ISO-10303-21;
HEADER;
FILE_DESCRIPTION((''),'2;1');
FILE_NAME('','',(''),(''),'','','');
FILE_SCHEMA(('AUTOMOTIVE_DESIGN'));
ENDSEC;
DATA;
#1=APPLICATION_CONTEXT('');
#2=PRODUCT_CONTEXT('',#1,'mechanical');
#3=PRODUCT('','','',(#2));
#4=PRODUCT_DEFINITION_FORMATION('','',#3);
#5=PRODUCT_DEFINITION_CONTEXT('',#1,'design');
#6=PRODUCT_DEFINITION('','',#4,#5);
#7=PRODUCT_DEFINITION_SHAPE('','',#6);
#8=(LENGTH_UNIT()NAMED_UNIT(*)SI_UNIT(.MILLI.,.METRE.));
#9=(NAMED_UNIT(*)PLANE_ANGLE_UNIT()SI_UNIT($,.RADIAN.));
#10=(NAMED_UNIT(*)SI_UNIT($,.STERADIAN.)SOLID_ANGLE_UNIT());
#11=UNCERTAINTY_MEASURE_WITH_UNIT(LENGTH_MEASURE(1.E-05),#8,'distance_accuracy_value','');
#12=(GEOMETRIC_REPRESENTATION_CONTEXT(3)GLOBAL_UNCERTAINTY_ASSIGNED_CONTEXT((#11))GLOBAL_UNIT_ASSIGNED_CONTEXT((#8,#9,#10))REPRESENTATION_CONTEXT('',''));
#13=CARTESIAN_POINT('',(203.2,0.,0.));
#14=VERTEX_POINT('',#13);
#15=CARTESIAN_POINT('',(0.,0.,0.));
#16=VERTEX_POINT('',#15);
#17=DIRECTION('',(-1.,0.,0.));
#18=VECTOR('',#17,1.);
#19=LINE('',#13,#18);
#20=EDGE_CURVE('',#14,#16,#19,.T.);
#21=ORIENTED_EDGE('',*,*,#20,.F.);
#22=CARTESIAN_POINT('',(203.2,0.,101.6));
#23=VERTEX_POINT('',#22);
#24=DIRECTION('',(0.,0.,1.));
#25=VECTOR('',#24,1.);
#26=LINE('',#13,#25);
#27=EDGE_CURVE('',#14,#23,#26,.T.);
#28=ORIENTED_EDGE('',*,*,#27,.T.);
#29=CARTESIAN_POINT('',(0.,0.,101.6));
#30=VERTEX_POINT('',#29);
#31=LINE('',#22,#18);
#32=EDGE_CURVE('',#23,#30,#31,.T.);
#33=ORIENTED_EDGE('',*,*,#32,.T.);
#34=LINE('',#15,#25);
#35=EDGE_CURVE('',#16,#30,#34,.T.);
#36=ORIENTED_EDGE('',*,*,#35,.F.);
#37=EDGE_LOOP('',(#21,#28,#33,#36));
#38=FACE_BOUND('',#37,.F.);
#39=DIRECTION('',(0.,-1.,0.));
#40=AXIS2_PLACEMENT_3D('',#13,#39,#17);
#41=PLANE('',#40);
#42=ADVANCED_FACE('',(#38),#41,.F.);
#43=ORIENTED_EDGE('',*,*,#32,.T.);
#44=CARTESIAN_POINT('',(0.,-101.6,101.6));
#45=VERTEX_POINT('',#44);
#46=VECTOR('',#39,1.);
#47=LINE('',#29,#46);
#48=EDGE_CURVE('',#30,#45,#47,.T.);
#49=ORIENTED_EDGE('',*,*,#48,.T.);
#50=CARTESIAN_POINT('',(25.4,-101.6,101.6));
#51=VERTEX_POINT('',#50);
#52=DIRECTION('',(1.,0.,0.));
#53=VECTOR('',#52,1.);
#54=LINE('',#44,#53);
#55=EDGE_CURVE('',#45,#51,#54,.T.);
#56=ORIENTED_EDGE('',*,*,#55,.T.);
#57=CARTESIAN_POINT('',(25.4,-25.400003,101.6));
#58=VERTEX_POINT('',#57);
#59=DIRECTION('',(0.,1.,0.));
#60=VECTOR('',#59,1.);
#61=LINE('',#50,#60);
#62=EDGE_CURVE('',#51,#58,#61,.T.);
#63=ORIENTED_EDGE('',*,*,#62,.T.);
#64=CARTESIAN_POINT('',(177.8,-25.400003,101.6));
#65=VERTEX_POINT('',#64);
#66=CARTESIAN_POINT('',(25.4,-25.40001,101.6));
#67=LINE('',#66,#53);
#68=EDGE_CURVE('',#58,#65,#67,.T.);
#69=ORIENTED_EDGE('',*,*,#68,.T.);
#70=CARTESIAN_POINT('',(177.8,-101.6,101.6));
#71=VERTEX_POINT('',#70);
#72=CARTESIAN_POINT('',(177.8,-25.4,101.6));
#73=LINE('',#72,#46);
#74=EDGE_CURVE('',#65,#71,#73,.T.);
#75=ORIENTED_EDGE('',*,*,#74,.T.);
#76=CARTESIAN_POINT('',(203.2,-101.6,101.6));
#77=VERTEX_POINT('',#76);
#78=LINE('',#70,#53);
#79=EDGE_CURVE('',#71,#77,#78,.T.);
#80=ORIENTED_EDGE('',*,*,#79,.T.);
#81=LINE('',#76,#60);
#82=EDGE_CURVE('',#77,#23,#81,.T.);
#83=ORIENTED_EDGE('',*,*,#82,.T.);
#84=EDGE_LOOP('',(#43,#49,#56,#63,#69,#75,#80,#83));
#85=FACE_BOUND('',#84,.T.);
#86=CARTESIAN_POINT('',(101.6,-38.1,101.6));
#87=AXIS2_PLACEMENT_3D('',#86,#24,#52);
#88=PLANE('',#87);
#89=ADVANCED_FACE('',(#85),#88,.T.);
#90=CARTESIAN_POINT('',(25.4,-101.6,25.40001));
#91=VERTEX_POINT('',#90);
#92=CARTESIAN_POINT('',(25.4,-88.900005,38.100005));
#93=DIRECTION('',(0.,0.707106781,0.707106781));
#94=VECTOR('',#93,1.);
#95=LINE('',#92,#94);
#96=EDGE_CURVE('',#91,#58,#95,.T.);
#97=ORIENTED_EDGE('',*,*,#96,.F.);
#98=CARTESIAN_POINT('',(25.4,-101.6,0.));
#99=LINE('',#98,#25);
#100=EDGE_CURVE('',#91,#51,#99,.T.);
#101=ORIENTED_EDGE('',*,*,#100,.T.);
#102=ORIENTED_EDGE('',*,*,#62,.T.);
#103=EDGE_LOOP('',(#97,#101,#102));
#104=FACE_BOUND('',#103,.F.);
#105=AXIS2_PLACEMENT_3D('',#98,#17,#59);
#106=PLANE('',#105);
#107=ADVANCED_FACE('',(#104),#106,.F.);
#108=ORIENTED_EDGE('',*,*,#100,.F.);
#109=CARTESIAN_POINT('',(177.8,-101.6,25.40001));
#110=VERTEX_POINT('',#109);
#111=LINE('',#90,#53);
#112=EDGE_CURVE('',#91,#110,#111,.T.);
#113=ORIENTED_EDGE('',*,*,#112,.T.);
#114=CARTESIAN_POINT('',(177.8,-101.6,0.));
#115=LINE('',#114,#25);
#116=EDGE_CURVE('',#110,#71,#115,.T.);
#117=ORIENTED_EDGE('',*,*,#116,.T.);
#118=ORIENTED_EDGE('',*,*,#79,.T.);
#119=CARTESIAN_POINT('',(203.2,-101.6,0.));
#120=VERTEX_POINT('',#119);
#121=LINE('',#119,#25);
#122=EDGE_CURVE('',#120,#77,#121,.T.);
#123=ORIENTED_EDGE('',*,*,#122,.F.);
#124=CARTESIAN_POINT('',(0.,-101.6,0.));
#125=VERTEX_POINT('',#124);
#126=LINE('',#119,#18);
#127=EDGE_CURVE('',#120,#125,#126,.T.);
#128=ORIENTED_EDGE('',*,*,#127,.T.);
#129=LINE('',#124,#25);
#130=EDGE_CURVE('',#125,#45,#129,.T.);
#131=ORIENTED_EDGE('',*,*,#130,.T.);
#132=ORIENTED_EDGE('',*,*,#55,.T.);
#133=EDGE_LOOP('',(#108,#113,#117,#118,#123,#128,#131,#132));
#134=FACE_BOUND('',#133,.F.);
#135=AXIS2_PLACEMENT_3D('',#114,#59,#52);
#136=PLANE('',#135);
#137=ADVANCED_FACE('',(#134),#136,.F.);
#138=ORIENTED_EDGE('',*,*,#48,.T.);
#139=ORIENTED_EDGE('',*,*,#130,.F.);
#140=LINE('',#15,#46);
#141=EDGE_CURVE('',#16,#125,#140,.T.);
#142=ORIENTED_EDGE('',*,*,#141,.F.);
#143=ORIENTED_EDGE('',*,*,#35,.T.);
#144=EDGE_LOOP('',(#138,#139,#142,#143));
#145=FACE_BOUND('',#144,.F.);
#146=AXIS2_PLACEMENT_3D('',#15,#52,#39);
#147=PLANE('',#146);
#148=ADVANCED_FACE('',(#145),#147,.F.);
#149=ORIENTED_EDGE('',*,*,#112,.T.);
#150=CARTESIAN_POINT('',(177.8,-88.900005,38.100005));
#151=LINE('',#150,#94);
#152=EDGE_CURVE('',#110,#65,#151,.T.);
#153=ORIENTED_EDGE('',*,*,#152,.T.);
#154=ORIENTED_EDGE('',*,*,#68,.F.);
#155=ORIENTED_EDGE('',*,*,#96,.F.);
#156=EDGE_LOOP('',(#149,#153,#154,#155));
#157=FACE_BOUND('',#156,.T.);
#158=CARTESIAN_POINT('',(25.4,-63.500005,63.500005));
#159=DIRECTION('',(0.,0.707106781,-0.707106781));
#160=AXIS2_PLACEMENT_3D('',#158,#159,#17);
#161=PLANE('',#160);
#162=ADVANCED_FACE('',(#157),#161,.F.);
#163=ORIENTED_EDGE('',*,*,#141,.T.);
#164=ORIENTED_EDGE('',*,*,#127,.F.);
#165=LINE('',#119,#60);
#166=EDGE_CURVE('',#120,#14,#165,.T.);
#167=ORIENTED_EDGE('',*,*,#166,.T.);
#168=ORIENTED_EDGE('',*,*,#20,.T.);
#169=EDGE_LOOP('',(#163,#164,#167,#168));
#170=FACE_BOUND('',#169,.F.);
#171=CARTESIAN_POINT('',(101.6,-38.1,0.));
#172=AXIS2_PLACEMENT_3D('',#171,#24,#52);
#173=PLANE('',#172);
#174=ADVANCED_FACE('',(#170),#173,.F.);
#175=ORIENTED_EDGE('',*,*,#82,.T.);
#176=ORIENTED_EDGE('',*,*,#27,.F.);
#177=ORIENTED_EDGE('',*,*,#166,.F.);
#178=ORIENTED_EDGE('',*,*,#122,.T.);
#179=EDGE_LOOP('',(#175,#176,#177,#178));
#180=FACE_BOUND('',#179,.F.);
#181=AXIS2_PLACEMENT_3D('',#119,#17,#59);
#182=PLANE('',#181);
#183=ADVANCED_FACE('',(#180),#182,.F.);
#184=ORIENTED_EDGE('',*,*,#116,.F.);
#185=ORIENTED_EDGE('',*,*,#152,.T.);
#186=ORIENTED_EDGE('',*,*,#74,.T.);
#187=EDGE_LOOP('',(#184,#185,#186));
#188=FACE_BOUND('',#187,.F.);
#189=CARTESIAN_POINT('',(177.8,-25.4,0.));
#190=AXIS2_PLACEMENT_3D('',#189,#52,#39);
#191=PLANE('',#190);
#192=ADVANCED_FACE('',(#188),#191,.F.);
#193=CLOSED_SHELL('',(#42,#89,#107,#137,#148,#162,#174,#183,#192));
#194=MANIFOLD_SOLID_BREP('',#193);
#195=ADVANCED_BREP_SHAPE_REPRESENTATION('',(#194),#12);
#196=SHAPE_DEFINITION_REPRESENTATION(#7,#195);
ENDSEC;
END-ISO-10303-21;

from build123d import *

# Parameters (mm, degrees)
F1_W     = 152.4
F1_H     = 76.2
F2_DEPTH = 101.6
F3_SIZE2 = 76.19999
F3_SIZE  = 76.19999
F5_DEPTH = 101.6


# Not quite as in the source:
# - a fillet or chamfer is up to 0.001 mm smaller than in the source, because OpenCascade refuses the exact size


with BuildPart() as f2:
    # F1 (on face) → F2 (new body)
    with BuildSketch(Plane.XY):
        with Locations((101.6, -63.5)):
            Rectangle(F1_W, F1_H)
    extrude(amount=F2_DEPTH)

    # F3 (size 76.2 and 76.2 in the source; OpenCascade refuses exactly that, so slightly less here)
    f3_edges = [f2.edges().sort_by_distance(p)[0] for p in [
        (101.6, -101.6, 101.6),
    ]]
    chamfer(f3_edges, length=F3_SIZE, length2=F3_SIZE2)

    # F4 (on face) → F5 (join)
    with BuildSketch(Plane.XY):
        Polygon((203.2, 0), (0, 0), (0, -101.6), (25.4, -101.6), (25.4, -25.4), (177.8, -25.4), (177.8, -101.6), (203.2, -101.6), align=None)
    extrude(amount=F5_DEPTH)


solid = f2.part
